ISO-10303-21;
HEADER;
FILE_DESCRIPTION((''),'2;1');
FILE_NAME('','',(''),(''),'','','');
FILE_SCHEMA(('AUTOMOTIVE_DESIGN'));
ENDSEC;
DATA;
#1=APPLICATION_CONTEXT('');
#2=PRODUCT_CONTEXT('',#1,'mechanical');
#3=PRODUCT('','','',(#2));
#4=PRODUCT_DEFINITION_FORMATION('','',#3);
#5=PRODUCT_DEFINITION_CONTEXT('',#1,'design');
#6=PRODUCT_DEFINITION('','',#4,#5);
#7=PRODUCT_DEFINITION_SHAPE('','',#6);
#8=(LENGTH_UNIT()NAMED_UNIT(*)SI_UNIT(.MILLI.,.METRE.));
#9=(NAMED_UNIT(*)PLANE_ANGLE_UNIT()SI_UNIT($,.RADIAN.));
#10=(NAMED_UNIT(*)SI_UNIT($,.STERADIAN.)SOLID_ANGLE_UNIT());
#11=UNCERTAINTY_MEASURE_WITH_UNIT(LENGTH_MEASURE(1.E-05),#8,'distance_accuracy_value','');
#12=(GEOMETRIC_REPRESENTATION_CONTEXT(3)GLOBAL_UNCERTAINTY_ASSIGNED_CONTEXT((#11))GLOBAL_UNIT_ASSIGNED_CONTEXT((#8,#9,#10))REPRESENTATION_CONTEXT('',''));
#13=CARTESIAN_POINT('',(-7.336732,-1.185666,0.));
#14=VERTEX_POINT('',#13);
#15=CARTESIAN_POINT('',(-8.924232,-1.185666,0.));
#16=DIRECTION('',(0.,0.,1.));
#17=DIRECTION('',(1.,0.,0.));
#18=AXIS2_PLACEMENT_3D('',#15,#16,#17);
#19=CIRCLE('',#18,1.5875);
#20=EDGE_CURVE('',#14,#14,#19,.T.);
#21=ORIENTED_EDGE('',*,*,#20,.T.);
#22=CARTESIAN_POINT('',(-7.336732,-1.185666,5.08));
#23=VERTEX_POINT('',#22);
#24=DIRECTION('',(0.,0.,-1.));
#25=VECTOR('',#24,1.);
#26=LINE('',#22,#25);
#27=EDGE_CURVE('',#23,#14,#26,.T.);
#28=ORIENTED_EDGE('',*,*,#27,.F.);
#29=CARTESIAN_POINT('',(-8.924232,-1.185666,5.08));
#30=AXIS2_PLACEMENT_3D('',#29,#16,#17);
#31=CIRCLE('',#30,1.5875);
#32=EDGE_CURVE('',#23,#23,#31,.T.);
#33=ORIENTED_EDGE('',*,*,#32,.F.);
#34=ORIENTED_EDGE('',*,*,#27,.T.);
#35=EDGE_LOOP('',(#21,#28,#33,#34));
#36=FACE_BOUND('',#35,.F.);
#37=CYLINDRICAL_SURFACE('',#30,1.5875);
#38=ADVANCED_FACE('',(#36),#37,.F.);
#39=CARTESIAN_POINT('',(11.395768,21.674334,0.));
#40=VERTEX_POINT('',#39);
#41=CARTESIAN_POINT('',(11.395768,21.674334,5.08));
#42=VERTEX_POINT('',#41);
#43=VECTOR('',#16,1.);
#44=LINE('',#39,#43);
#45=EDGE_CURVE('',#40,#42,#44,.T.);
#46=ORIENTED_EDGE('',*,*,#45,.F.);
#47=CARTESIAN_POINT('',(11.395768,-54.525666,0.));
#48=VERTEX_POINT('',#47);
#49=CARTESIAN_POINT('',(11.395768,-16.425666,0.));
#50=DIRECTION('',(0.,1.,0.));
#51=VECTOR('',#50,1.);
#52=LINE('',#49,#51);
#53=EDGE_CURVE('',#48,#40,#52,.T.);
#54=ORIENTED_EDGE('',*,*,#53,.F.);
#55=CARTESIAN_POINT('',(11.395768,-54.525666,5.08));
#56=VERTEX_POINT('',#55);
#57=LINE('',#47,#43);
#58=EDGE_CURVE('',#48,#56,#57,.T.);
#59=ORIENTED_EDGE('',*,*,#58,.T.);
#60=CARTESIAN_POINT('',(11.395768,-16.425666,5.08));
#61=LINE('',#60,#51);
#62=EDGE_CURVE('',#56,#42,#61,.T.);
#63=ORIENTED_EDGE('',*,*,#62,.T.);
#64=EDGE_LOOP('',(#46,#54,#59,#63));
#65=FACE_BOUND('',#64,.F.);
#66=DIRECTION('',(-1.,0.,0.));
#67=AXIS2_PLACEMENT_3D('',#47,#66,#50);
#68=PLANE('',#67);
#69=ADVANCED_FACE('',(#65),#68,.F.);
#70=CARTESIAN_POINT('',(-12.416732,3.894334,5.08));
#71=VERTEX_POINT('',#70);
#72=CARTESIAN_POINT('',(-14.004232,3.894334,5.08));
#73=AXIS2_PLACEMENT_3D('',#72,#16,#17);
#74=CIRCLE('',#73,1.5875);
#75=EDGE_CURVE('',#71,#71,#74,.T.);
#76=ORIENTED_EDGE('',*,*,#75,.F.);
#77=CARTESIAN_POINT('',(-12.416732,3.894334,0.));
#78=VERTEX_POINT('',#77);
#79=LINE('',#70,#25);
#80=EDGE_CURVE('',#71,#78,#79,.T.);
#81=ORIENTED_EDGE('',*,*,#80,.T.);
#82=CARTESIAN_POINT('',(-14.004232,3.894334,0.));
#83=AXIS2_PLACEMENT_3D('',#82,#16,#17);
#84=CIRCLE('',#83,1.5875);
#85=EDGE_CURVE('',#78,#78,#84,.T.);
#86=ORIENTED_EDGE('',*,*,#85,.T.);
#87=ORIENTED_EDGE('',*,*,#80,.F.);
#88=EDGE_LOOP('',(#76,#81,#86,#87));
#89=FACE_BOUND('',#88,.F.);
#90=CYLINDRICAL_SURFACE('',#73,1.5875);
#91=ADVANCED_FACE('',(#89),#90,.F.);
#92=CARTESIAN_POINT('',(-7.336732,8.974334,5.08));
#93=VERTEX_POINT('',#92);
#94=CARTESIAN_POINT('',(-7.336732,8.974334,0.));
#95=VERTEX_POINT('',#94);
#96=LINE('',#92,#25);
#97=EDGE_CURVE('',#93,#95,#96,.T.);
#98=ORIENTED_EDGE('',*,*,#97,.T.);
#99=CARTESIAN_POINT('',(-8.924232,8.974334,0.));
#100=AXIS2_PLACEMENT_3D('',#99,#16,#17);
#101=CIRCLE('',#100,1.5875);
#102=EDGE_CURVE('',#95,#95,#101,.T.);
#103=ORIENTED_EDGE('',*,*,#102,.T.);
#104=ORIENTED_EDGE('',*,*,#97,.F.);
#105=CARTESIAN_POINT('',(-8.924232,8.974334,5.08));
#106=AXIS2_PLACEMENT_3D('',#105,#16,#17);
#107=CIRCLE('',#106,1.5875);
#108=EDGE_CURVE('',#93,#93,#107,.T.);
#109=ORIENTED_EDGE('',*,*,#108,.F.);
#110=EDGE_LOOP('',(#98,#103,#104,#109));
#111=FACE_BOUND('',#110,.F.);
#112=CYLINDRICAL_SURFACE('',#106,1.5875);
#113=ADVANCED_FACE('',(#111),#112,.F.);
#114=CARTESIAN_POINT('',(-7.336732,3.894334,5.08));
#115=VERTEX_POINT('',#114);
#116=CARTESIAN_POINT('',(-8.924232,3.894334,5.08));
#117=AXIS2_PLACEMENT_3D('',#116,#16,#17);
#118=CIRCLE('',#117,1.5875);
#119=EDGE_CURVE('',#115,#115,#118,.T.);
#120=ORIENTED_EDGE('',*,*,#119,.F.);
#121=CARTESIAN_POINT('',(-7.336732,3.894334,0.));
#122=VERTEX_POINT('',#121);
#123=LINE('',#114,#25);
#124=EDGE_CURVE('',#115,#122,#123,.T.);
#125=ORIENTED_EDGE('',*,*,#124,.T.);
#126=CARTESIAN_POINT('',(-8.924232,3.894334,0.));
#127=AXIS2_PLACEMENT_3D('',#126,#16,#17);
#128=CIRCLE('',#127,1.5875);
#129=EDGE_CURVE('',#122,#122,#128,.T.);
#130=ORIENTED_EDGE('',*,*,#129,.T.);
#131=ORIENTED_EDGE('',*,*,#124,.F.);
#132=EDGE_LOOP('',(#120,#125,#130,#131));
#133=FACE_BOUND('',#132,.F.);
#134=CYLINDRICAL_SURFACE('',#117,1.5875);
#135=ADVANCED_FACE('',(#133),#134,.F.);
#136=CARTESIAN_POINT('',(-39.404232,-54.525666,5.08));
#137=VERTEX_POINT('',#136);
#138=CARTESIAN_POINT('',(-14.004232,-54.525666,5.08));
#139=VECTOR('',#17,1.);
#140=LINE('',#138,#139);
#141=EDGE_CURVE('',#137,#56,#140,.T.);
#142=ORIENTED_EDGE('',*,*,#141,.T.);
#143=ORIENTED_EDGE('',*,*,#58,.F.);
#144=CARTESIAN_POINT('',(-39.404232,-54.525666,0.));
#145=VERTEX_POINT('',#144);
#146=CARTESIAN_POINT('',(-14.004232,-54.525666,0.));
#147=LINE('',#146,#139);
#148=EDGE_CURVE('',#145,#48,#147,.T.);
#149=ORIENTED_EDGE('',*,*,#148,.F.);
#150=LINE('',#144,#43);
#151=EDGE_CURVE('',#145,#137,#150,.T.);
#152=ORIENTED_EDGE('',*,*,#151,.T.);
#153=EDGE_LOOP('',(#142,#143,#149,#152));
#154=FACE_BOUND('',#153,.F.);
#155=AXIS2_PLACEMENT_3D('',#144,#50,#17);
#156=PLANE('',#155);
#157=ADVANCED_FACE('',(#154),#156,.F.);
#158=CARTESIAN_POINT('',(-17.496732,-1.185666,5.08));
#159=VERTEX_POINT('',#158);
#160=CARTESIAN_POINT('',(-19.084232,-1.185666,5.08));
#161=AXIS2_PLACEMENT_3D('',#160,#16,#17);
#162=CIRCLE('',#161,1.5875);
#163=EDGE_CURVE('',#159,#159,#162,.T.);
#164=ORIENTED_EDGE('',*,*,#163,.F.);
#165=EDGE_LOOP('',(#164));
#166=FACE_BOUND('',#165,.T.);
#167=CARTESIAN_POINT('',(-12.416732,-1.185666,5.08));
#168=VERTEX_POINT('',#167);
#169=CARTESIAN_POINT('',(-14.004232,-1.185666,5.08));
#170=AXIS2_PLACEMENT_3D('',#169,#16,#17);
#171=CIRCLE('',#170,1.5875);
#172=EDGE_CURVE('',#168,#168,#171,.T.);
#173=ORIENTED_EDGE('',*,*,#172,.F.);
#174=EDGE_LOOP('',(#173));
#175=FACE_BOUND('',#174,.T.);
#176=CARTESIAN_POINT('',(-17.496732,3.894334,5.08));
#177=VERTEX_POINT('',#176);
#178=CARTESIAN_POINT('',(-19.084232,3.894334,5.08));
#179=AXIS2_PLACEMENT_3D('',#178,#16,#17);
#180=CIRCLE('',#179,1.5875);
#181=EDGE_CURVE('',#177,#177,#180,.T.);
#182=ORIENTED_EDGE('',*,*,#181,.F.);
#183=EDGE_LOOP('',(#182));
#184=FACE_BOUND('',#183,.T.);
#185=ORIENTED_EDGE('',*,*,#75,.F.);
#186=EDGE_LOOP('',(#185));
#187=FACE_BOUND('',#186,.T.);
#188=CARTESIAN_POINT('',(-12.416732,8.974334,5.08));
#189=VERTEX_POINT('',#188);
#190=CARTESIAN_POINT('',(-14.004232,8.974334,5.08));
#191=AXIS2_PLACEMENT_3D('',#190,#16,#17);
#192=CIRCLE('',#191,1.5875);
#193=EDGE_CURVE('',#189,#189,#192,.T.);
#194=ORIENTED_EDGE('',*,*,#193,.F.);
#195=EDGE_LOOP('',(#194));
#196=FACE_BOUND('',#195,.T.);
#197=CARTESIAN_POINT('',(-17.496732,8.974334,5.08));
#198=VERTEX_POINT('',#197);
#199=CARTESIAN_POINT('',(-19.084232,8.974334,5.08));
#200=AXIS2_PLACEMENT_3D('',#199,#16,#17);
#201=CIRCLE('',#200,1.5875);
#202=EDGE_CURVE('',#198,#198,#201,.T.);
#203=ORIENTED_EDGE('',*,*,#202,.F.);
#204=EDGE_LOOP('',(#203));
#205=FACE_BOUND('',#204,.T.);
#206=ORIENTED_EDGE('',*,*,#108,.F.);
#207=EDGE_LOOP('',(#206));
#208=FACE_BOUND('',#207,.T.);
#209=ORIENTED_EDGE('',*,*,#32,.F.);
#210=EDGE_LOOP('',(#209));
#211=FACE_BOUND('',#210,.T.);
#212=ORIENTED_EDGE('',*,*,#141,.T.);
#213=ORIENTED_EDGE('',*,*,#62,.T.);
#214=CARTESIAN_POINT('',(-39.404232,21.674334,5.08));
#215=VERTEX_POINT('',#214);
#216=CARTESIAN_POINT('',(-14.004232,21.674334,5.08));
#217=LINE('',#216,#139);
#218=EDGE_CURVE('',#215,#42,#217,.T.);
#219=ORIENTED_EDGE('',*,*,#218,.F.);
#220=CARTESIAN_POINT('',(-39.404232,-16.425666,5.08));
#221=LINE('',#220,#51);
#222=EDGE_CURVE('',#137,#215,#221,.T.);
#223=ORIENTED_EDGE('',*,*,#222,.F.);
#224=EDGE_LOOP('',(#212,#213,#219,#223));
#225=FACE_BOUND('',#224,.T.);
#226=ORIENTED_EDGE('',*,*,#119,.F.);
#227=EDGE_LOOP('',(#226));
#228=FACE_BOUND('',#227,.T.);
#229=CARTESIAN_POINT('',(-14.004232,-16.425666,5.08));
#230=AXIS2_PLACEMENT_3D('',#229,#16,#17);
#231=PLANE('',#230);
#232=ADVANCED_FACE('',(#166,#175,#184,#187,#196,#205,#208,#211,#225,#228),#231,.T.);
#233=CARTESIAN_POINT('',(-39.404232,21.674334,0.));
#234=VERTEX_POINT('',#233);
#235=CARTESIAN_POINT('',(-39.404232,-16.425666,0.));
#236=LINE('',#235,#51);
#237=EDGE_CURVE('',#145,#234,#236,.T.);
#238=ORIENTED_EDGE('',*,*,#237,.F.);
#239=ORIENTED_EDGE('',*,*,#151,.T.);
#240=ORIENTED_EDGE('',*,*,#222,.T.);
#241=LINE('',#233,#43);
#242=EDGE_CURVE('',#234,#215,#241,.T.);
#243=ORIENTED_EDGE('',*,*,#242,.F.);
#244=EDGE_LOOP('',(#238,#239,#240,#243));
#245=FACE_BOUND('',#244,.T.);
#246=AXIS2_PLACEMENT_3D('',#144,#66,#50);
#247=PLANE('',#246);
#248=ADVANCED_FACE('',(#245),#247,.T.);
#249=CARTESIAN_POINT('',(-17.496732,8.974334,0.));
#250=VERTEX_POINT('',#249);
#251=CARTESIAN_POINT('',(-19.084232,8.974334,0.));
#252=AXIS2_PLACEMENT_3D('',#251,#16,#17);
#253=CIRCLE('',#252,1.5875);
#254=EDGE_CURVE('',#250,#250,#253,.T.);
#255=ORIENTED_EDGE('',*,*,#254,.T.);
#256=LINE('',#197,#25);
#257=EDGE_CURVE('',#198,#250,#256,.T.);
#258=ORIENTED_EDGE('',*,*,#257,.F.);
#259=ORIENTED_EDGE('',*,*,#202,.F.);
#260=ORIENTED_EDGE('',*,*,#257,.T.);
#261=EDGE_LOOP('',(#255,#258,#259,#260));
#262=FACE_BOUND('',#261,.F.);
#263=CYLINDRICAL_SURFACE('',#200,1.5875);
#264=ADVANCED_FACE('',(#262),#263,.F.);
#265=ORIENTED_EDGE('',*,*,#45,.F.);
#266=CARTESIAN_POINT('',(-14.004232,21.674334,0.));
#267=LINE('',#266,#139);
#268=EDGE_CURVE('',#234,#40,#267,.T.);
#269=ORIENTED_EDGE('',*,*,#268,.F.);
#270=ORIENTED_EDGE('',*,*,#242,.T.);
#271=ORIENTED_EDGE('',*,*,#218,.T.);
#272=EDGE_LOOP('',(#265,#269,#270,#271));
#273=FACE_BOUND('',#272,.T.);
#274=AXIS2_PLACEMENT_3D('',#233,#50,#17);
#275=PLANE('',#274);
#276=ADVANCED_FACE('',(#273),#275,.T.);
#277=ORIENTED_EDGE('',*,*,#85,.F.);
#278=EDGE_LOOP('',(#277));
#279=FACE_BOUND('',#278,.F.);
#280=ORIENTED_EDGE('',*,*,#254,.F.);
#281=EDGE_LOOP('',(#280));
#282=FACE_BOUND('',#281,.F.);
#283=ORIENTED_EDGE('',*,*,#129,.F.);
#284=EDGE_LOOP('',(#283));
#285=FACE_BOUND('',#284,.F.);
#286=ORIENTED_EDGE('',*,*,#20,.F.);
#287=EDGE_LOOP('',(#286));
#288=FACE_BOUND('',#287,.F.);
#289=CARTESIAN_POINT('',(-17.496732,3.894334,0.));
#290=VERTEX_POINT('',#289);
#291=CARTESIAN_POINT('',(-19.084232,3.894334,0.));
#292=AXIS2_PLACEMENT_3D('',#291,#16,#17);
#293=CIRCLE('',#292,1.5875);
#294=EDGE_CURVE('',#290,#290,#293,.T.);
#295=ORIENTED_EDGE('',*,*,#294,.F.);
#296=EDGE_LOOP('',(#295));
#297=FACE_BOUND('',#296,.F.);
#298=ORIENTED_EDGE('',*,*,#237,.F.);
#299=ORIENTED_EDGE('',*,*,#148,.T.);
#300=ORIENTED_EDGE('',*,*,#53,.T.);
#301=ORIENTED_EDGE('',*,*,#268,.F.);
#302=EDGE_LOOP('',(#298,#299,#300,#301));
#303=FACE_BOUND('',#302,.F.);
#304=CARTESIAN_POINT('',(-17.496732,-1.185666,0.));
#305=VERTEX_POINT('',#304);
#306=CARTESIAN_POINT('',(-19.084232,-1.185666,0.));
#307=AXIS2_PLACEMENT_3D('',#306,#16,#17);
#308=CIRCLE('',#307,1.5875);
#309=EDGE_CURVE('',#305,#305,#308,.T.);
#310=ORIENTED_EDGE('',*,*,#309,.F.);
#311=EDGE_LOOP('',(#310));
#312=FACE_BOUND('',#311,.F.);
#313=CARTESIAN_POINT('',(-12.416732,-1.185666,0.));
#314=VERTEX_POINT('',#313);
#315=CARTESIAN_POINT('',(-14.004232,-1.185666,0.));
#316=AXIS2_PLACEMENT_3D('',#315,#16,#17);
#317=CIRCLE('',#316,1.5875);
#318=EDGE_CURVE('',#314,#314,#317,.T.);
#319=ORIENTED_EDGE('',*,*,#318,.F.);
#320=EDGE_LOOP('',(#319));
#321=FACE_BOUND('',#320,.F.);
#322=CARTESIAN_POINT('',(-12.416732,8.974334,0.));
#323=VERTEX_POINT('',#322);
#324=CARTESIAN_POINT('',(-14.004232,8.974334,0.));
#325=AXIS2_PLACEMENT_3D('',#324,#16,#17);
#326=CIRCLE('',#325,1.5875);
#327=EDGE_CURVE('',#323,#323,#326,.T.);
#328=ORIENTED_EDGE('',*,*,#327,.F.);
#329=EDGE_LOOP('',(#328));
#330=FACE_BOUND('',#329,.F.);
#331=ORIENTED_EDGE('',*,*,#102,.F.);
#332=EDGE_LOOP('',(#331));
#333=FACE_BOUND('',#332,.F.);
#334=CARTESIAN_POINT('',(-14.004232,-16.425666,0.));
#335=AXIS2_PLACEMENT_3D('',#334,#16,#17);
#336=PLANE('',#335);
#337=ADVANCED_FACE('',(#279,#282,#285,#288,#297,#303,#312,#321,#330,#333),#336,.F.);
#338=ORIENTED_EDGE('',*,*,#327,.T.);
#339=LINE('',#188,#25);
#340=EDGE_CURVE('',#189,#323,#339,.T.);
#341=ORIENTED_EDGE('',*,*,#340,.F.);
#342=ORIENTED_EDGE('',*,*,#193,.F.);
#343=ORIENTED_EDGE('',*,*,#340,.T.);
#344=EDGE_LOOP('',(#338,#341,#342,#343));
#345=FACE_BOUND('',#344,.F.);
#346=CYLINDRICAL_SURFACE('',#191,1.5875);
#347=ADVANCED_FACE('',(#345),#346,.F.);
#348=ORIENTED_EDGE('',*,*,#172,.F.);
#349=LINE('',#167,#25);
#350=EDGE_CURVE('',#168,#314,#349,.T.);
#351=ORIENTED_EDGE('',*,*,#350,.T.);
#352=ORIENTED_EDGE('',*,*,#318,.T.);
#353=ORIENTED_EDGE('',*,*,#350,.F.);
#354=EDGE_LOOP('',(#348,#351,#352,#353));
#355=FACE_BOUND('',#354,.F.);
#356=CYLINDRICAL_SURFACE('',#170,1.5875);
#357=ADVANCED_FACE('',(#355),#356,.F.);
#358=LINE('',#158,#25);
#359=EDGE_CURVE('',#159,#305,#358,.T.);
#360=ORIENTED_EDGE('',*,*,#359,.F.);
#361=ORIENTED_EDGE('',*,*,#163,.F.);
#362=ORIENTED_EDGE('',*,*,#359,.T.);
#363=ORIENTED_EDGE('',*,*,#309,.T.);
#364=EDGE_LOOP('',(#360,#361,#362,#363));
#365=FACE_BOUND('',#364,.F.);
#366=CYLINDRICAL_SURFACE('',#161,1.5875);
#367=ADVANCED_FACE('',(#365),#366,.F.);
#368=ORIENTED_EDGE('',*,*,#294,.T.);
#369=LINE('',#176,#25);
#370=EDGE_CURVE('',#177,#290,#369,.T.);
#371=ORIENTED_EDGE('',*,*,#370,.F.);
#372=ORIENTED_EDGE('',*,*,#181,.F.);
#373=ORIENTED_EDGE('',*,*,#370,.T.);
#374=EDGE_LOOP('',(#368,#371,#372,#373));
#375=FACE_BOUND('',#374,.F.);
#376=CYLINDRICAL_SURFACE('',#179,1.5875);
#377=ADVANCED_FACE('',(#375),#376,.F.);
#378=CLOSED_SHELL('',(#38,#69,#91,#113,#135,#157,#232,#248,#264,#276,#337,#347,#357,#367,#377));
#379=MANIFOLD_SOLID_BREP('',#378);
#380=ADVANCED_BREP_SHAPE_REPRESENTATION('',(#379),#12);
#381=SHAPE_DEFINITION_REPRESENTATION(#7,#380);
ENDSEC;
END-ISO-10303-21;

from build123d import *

# Parameters (mm, degrees)
F0_W     = 50.8
F0_H     = 76.2
F1_DEPTH = 5.08
F2_R     = 1.5875
F3_DEPTH = 76.2


# Not quite as in the source:
# - a feature names something its author has since deleted; it is built from what else it names


with BuildPart() as f1:
    # F0 (on Top) → F1 (new body)
    with BuildSketch(Plane.XY):
        with Locations((-14.0042318553, -16.4256663384)):
            Rectangle(F0_W, F0_H)
    extrude(amount=F1_DEPTH)

    # F2 (on face) → F3 (cut)
    with BuildSketch(Plane.XY.offset(5.08)):
        with Locations((-19.0842318553, 8.9743336616)):
            Circle(F2_R)
        with Locations((-14.0042318553, 8.9743336616)):
            Circle(F2_R)
        with Locations((-8.9242318553, 8.9743336616)):
            Circle(F2_R)
        with Locations((-19.0842318553, 3.8943336616)):
            Circle(F2_R)
        with Locations((-14.0042318553, 3.8943336616)):
            Circle(F2_R)
        with Locations((-8.9242318553, 3.8943336616)):
            Circle(F2_R)
        with Locations((-19.0842318553, -1.1856663384)):
            Circle(F2_R)
        with Locations((-14.0042318553, -1.1856663384)):
            Circle(F2_R)
        with Locations((-8.9242318553, -1.1856663384)):
            Circle(F2_R)
    extrude(amount=-F3_DEPTH, mode=Mode.SUBTRACT)


solid = f1.part
